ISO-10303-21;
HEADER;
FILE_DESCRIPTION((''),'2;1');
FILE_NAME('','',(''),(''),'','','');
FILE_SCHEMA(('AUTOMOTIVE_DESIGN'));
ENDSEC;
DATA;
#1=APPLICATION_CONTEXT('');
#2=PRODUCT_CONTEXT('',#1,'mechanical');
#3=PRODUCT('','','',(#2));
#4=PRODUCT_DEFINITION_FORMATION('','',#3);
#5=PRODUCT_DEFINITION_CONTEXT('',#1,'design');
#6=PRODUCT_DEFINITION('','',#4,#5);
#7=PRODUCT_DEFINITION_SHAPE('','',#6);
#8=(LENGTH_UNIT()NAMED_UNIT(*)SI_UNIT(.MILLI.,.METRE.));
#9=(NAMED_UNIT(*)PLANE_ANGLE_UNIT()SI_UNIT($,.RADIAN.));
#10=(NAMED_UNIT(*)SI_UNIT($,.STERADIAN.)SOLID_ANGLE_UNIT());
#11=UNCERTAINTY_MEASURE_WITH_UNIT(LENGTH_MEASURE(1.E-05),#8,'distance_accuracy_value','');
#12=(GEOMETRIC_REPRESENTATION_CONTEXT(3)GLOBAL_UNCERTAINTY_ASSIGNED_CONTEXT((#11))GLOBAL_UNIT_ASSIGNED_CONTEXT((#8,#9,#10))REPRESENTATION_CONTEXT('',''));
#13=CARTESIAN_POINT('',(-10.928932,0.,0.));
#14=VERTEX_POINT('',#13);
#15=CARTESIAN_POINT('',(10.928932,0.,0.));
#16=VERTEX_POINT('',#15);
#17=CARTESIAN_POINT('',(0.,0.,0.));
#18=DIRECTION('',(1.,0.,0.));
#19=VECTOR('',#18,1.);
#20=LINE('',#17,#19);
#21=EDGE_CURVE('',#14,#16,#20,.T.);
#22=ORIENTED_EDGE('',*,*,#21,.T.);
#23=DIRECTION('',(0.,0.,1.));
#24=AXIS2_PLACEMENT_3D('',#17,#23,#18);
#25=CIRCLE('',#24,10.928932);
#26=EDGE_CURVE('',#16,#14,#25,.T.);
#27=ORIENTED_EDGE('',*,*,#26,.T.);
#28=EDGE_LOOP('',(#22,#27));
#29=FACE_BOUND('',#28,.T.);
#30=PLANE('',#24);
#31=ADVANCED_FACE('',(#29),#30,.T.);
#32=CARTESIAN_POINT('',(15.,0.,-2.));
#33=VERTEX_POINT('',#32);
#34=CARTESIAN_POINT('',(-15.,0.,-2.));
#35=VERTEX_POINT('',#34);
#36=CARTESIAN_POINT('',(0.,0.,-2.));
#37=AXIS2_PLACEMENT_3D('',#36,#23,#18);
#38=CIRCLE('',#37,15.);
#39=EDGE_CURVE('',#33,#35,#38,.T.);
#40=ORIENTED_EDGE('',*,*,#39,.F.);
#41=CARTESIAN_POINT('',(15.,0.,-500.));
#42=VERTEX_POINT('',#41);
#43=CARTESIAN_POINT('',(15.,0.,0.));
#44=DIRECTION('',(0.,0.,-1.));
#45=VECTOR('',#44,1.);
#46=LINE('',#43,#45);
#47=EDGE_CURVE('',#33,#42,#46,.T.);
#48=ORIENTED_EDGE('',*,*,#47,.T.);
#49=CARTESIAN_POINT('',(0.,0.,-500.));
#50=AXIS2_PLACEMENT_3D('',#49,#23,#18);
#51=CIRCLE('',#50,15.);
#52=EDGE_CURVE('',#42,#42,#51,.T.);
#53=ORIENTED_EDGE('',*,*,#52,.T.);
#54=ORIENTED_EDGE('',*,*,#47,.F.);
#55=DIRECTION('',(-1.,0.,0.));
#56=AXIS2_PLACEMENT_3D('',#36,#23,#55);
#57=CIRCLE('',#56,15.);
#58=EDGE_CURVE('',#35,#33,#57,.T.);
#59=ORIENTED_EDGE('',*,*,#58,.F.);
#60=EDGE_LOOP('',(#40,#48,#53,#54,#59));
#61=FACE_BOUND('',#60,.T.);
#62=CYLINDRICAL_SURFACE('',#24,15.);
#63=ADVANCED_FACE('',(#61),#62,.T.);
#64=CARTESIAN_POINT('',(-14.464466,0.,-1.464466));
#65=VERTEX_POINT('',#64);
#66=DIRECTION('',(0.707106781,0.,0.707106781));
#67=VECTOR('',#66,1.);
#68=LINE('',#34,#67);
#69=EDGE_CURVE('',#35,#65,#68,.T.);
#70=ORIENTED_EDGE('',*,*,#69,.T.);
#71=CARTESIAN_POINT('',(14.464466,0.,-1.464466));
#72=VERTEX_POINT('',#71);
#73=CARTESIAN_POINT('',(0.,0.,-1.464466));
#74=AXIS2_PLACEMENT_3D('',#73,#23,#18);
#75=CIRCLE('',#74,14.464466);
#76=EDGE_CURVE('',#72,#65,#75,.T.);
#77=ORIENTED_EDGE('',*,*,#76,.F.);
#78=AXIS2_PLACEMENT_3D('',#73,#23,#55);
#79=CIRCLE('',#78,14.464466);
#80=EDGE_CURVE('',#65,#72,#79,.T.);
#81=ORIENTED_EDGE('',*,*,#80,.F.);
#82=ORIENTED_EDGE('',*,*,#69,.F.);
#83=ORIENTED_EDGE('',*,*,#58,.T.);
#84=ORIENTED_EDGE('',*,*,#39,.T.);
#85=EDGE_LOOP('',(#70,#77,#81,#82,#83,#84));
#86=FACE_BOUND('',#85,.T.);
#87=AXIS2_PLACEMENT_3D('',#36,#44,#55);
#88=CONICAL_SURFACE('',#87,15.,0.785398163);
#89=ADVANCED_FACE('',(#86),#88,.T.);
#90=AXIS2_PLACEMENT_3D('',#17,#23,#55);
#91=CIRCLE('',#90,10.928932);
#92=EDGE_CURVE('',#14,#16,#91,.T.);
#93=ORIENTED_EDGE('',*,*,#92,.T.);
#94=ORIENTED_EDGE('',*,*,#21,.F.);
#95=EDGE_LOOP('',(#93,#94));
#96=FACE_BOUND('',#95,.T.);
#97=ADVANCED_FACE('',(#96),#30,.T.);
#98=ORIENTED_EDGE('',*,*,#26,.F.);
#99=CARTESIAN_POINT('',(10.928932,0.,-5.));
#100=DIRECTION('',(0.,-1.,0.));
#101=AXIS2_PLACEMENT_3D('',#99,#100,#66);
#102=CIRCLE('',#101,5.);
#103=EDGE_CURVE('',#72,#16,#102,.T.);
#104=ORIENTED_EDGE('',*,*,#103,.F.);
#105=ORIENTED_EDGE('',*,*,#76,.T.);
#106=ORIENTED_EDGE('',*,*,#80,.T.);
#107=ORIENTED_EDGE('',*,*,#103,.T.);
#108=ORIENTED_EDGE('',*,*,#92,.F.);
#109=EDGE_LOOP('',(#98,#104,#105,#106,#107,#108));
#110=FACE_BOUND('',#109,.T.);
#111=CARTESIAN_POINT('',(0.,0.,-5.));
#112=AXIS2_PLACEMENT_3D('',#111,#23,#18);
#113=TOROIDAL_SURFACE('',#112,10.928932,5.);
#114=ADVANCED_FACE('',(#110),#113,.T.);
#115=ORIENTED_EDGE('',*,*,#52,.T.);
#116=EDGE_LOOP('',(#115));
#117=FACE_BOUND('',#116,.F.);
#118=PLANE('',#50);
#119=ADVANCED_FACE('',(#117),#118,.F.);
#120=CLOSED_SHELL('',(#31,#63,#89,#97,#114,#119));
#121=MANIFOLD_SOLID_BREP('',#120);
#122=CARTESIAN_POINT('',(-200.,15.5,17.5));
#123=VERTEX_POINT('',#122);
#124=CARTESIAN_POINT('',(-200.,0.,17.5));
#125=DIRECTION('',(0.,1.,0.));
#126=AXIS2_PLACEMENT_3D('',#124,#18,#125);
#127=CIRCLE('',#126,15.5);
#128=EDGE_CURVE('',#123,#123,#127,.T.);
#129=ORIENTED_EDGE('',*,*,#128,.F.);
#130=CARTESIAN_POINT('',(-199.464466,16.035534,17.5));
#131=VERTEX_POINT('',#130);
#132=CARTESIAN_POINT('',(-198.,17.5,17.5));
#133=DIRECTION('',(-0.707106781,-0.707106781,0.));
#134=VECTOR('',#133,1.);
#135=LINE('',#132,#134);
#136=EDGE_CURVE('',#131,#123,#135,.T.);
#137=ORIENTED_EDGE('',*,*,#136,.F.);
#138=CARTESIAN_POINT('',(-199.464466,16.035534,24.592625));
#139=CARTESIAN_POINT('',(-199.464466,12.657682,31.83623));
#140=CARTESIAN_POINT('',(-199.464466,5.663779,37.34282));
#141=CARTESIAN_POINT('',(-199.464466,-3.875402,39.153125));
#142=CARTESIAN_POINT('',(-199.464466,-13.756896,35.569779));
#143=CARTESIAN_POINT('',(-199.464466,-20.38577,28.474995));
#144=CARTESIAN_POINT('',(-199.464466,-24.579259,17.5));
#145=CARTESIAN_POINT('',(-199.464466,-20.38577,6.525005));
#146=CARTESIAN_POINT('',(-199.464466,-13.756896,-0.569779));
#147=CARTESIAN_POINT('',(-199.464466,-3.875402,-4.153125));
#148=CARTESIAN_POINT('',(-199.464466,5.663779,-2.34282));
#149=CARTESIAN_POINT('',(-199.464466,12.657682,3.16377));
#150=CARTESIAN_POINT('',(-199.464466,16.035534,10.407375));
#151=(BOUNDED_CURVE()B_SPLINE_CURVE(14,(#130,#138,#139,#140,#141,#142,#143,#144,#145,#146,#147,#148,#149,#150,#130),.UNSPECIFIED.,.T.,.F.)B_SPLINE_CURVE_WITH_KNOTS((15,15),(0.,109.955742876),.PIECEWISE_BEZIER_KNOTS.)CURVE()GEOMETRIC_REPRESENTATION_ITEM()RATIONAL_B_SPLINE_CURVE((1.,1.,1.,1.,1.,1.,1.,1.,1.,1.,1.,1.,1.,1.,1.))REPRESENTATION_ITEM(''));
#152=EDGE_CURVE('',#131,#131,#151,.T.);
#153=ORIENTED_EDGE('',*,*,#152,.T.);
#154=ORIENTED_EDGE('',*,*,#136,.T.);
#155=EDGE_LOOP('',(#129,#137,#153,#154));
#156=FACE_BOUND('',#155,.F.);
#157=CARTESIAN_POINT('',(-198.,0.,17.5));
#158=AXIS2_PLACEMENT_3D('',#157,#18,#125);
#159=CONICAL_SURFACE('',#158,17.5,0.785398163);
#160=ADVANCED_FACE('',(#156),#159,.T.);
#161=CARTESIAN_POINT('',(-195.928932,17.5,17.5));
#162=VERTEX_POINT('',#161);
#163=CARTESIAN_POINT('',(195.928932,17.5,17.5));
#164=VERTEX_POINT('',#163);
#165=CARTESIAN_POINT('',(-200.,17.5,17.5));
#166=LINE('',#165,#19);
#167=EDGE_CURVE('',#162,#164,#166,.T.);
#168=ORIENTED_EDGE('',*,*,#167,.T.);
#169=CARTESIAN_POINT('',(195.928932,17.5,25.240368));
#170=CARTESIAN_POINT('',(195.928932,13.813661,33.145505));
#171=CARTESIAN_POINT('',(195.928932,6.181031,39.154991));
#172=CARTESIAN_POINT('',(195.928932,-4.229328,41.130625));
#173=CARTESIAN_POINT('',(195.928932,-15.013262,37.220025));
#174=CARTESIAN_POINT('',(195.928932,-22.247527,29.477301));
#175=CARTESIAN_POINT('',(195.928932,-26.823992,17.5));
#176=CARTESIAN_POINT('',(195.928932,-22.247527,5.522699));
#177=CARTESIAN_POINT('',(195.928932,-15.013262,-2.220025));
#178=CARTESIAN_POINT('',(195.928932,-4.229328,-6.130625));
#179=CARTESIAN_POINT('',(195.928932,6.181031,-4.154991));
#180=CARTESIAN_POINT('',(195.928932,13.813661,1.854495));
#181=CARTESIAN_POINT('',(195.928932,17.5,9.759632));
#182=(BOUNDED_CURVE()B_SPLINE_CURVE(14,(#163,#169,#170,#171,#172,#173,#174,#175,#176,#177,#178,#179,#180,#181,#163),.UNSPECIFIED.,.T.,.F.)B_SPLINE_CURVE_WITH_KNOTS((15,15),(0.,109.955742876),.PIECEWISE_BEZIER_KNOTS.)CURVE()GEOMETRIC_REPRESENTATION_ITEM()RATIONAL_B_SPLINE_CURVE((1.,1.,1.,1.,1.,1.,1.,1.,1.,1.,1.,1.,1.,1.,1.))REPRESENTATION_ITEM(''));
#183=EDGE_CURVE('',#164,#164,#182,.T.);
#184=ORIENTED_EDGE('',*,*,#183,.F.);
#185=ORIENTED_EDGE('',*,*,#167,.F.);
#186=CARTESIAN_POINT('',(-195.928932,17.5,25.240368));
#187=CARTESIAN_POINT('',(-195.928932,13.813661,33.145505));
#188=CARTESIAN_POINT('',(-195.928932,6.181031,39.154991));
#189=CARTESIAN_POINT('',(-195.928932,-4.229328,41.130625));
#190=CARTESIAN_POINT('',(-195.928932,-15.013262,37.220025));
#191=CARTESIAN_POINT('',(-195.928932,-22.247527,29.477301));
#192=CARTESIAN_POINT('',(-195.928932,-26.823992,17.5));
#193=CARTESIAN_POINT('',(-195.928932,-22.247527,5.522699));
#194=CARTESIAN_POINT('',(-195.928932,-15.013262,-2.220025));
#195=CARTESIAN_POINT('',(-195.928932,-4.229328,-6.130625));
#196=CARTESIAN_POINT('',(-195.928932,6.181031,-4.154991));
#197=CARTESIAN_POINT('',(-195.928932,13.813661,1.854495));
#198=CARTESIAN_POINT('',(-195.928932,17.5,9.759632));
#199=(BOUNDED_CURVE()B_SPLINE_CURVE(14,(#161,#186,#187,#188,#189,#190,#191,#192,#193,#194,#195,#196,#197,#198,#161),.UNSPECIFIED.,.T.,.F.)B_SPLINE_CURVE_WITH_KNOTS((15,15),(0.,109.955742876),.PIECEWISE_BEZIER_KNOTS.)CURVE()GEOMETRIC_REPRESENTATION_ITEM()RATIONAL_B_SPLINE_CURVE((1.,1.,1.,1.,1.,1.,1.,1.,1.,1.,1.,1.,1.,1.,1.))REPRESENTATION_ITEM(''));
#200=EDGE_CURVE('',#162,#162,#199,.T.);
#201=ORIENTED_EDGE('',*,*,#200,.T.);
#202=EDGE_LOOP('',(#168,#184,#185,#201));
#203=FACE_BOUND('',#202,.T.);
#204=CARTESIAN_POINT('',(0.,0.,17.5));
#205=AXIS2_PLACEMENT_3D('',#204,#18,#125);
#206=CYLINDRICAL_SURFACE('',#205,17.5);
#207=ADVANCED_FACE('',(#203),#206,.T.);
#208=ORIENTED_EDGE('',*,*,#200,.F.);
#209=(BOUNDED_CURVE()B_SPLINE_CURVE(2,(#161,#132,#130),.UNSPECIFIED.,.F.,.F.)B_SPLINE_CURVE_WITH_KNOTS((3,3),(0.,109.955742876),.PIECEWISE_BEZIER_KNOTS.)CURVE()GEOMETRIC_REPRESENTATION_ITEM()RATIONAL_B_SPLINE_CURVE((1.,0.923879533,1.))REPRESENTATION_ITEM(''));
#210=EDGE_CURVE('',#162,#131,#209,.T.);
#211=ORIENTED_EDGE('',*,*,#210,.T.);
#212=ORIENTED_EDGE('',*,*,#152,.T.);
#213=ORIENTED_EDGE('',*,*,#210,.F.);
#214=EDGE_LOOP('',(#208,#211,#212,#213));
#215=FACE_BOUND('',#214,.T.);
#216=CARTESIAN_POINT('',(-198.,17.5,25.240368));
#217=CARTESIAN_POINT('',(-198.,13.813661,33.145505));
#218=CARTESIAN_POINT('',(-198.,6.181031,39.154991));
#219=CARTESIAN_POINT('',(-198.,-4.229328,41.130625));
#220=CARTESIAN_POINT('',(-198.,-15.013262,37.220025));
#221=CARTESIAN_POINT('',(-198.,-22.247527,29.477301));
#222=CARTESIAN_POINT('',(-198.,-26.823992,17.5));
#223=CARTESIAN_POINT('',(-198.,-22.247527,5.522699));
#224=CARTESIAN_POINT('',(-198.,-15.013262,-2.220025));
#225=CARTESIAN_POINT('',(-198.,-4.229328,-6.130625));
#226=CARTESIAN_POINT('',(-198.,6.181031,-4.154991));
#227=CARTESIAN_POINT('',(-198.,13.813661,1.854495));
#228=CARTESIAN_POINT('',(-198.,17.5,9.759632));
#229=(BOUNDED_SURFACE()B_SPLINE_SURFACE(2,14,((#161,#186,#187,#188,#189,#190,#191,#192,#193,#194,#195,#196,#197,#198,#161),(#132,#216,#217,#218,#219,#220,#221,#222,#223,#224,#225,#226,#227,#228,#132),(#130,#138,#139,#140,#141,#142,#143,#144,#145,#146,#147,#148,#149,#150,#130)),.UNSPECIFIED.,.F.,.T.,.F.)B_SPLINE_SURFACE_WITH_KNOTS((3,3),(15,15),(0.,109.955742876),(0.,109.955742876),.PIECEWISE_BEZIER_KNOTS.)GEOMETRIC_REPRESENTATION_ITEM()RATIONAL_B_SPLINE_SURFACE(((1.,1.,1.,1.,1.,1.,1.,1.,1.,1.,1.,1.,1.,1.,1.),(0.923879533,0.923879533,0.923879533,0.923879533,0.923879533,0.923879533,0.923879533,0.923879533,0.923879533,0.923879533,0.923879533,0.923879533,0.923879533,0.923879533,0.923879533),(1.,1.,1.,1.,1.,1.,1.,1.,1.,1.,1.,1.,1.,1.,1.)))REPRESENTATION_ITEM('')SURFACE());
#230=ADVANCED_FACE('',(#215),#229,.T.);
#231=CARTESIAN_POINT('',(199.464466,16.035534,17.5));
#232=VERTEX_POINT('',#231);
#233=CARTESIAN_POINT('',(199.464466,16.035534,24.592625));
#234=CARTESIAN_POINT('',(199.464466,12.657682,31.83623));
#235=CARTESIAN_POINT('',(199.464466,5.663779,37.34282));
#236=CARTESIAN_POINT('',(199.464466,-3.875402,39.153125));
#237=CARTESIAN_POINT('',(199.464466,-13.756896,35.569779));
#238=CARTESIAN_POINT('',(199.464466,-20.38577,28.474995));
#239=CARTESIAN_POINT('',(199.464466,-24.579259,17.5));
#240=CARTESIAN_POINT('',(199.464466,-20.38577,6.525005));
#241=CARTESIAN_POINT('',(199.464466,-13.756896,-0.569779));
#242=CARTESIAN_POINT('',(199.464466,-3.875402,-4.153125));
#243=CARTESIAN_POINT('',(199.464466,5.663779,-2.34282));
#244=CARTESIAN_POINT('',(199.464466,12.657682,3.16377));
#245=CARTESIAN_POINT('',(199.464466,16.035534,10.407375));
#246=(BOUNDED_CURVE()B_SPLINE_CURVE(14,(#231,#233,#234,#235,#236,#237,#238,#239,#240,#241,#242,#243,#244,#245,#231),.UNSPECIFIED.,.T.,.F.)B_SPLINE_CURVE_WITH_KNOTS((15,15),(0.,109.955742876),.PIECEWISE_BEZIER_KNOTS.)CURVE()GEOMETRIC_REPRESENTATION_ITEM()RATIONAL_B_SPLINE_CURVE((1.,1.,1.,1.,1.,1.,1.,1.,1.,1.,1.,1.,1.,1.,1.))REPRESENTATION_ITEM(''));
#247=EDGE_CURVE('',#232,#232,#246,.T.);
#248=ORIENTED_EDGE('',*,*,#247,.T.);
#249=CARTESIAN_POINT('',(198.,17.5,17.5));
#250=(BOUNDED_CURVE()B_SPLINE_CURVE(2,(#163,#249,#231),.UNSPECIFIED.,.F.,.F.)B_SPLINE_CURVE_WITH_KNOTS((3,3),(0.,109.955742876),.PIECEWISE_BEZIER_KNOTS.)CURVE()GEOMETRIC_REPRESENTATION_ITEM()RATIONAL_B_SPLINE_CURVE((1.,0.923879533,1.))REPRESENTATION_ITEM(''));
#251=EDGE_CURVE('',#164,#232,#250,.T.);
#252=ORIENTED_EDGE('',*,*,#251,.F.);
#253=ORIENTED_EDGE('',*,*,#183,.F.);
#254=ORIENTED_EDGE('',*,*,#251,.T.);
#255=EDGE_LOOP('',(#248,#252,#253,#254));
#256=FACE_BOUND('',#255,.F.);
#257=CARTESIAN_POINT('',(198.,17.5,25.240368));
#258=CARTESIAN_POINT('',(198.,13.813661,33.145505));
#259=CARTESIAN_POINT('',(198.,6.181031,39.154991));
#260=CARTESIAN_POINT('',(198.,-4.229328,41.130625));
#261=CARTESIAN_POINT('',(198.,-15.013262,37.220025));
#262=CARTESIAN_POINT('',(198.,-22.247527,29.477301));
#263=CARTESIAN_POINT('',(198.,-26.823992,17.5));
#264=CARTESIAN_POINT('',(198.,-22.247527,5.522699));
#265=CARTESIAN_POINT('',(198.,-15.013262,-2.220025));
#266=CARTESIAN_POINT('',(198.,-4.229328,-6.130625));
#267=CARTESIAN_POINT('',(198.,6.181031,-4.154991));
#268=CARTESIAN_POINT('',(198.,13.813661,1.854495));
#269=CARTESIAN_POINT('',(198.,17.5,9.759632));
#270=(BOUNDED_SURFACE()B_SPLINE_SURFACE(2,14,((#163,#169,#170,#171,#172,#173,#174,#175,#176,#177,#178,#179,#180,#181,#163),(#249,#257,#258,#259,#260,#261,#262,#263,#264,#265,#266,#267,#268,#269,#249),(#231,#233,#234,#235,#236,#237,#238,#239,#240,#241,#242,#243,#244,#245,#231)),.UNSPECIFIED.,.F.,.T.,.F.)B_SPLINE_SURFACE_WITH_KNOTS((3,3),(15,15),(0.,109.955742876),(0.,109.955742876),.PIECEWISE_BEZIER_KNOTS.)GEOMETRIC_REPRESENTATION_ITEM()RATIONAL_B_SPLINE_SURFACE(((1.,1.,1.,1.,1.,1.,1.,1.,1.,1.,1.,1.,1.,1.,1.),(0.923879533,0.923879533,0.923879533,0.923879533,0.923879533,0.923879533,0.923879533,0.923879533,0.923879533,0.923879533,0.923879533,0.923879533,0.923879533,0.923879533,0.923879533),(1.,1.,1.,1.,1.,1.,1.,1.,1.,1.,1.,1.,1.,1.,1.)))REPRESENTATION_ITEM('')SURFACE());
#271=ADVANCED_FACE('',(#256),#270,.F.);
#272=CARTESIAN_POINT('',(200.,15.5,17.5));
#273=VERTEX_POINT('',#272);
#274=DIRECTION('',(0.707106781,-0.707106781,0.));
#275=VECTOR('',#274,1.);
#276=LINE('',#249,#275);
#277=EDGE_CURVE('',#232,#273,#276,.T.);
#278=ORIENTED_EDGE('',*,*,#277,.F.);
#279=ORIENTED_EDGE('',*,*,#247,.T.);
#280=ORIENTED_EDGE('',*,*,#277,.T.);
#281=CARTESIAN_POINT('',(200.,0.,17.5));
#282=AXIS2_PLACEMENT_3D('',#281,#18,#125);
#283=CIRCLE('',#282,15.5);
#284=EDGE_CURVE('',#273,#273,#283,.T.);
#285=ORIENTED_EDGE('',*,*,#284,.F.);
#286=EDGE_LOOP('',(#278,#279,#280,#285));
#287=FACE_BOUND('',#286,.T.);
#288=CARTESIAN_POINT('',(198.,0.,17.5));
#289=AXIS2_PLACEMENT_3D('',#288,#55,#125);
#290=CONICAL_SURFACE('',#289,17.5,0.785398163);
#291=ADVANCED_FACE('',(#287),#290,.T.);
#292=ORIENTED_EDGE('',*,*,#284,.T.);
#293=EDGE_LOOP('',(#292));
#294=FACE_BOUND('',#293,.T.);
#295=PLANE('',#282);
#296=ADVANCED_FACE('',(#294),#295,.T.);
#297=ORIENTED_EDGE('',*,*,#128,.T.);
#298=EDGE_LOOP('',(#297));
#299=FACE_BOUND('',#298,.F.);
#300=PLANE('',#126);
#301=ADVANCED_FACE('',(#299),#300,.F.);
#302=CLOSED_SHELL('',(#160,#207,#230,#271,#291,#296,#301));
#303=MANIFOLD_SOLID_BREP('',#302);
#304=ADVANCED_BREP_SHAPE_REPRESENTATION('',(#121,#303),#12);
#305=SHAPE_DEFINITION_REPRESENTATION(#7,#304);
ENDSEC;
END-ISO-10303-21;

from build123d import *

# Parameters (mm, degrees)
F0_R           = 15
F1_DEPTH       = 500
F2_R           = 17.5
F3_DEPTH       = 200
F4_T2_ANGLE    = 180
F4_T4_ANGLE    = 180
F4_S1_C1_SIZE  = 2
F4_S1_C2_SIZE  = 2
F5_F1_R        = 5
F5_F2_R        = 5
F5_S1_T2_ANGLE = 180
F5_S1_T4_ANGLE = 180


# Not quite as in the source:
# - a fillet or chamfer that OpenCascade refuses, or shapes differently, is made with other operations: its cross-section is extruded or revolved along the edge and cut away or added


with BuildPart() as f1:
    # F0 (on Top) → F1 (new body)
    with BuildSketch(Plane.XY):
        Circle(F0_R)
    extrude(amount=-F1_DEPTH)

    # F2 (on Right) → F3 (join, symmetric)
    with BuildSketch(Plane.YZ):
        with Locations((0, 17.5)):
            Circle(F2_R)
    extrude(amount=F3_DEPTH, both=True)

    # F4: chamfer of 2 on 3 edges, made by hand

    # F4_s1 → F4_t2 (revolve, cut)
    with BuildSketch(Plane.XZ):
        Polygon((15, -2), (13, 0), (15, 0), align=None)
    revolve(axis=Axis((0, 0, 0), (0, 0, 1)), revolution_arc=F4_T2_ANGLE, mode=Mode.SUBTRACT)

    # F4_s3 → F4_t4 (revolve, cut)
    with BuildSketch(Plane.XZ):
        Polygon((-15, -2), (-13, 0), (-15, 0), align=None)
    revolve(axis=Axis((0, 0, 0), (0, 0, 1)), revolution_arc=F4_T4_ANGLE, mode=Mode.SUBTRACT)

    # F4#s1: chamfer of 2 on 3 edges, made by hand

    # F4_s1_c1
    f4_s1_c1_edges = [f1.edges().sort_by_distance(p)[0] for p in [
        (200, -17.5, 17.5),
    ]]
    chamfer(f4_s1_c1_edges, length=F4_S1_C1_SIZE)

    # F4_s1_c2
    f4_s1_c2_edges = [f1.edges().sort_by_distance(p)[0] for p in [
        (-200, -17.5, 17.5),
    ]]
    chamfer(f4_s1_c2_edges, length=F4_S1_C2_SIZE)

    # F5: fillet of radius 5 on 6 edges, made by hand

    # F5_f1
    f5_f1_edges = [f1.edges().sort_by_distance(p)[0] for p in [
        (-198, -17.5, 17.5),
    ]]
    fillet(f5_f1_edges, radius=F5_F1_R)

    # F5_f2
    f5_f2_edges = [f1.edges().sort_by_distance(p)[0] for p in [
        (198, -17.5, 17.5),
    ]]
    fillet(f5_f2_edges, radius=F5_F2_R)

    # F5#s1: fillet of radius 5 on 2 edges, made by hand

    # F5_s1_s1 → F5_s1_t2 (revolve, cut)
    with BuildSketch(Plane.XZ):
        with BuildLine():
            ThreePointArc((-14.4644660941, -1.4644660941), (-12.84234935, -0.3806023374), (-10.9289321881, 0))
            Line((-10.9289321881, 0), (-13, 0))
            Line((-13, 0), (-14.4644660941, -1.4644660941))
        make_face()
    revolve(axis=Axis((0, 0, 0), (0, 0, 1)), revolution_arc=F5_S1_T2_ANGLE, mode=Mode.SUBTRACT)

    # F5_s1_s3 → F5_s1_t4 (revolve, cut)
    with BuildSketch(Plane.XZ):
        with BuildLine():
            ThreePointArc((14.4644660941, -1.4644660941), (12.84234935, -0.3806023374), (10.9289321881, 0))
            Line((10.9289321881, 0), (13, 0))
            Line((13, 0), (14.4644660941, -1.4644660941))
        make_face()
    revolve(axis=Axis((0, 0, 0), (0, 0, 1)), revolution_arc=F5_S1_T4_ANGLE, mode=Mode.SUBTRACT)


solid = f1.part
